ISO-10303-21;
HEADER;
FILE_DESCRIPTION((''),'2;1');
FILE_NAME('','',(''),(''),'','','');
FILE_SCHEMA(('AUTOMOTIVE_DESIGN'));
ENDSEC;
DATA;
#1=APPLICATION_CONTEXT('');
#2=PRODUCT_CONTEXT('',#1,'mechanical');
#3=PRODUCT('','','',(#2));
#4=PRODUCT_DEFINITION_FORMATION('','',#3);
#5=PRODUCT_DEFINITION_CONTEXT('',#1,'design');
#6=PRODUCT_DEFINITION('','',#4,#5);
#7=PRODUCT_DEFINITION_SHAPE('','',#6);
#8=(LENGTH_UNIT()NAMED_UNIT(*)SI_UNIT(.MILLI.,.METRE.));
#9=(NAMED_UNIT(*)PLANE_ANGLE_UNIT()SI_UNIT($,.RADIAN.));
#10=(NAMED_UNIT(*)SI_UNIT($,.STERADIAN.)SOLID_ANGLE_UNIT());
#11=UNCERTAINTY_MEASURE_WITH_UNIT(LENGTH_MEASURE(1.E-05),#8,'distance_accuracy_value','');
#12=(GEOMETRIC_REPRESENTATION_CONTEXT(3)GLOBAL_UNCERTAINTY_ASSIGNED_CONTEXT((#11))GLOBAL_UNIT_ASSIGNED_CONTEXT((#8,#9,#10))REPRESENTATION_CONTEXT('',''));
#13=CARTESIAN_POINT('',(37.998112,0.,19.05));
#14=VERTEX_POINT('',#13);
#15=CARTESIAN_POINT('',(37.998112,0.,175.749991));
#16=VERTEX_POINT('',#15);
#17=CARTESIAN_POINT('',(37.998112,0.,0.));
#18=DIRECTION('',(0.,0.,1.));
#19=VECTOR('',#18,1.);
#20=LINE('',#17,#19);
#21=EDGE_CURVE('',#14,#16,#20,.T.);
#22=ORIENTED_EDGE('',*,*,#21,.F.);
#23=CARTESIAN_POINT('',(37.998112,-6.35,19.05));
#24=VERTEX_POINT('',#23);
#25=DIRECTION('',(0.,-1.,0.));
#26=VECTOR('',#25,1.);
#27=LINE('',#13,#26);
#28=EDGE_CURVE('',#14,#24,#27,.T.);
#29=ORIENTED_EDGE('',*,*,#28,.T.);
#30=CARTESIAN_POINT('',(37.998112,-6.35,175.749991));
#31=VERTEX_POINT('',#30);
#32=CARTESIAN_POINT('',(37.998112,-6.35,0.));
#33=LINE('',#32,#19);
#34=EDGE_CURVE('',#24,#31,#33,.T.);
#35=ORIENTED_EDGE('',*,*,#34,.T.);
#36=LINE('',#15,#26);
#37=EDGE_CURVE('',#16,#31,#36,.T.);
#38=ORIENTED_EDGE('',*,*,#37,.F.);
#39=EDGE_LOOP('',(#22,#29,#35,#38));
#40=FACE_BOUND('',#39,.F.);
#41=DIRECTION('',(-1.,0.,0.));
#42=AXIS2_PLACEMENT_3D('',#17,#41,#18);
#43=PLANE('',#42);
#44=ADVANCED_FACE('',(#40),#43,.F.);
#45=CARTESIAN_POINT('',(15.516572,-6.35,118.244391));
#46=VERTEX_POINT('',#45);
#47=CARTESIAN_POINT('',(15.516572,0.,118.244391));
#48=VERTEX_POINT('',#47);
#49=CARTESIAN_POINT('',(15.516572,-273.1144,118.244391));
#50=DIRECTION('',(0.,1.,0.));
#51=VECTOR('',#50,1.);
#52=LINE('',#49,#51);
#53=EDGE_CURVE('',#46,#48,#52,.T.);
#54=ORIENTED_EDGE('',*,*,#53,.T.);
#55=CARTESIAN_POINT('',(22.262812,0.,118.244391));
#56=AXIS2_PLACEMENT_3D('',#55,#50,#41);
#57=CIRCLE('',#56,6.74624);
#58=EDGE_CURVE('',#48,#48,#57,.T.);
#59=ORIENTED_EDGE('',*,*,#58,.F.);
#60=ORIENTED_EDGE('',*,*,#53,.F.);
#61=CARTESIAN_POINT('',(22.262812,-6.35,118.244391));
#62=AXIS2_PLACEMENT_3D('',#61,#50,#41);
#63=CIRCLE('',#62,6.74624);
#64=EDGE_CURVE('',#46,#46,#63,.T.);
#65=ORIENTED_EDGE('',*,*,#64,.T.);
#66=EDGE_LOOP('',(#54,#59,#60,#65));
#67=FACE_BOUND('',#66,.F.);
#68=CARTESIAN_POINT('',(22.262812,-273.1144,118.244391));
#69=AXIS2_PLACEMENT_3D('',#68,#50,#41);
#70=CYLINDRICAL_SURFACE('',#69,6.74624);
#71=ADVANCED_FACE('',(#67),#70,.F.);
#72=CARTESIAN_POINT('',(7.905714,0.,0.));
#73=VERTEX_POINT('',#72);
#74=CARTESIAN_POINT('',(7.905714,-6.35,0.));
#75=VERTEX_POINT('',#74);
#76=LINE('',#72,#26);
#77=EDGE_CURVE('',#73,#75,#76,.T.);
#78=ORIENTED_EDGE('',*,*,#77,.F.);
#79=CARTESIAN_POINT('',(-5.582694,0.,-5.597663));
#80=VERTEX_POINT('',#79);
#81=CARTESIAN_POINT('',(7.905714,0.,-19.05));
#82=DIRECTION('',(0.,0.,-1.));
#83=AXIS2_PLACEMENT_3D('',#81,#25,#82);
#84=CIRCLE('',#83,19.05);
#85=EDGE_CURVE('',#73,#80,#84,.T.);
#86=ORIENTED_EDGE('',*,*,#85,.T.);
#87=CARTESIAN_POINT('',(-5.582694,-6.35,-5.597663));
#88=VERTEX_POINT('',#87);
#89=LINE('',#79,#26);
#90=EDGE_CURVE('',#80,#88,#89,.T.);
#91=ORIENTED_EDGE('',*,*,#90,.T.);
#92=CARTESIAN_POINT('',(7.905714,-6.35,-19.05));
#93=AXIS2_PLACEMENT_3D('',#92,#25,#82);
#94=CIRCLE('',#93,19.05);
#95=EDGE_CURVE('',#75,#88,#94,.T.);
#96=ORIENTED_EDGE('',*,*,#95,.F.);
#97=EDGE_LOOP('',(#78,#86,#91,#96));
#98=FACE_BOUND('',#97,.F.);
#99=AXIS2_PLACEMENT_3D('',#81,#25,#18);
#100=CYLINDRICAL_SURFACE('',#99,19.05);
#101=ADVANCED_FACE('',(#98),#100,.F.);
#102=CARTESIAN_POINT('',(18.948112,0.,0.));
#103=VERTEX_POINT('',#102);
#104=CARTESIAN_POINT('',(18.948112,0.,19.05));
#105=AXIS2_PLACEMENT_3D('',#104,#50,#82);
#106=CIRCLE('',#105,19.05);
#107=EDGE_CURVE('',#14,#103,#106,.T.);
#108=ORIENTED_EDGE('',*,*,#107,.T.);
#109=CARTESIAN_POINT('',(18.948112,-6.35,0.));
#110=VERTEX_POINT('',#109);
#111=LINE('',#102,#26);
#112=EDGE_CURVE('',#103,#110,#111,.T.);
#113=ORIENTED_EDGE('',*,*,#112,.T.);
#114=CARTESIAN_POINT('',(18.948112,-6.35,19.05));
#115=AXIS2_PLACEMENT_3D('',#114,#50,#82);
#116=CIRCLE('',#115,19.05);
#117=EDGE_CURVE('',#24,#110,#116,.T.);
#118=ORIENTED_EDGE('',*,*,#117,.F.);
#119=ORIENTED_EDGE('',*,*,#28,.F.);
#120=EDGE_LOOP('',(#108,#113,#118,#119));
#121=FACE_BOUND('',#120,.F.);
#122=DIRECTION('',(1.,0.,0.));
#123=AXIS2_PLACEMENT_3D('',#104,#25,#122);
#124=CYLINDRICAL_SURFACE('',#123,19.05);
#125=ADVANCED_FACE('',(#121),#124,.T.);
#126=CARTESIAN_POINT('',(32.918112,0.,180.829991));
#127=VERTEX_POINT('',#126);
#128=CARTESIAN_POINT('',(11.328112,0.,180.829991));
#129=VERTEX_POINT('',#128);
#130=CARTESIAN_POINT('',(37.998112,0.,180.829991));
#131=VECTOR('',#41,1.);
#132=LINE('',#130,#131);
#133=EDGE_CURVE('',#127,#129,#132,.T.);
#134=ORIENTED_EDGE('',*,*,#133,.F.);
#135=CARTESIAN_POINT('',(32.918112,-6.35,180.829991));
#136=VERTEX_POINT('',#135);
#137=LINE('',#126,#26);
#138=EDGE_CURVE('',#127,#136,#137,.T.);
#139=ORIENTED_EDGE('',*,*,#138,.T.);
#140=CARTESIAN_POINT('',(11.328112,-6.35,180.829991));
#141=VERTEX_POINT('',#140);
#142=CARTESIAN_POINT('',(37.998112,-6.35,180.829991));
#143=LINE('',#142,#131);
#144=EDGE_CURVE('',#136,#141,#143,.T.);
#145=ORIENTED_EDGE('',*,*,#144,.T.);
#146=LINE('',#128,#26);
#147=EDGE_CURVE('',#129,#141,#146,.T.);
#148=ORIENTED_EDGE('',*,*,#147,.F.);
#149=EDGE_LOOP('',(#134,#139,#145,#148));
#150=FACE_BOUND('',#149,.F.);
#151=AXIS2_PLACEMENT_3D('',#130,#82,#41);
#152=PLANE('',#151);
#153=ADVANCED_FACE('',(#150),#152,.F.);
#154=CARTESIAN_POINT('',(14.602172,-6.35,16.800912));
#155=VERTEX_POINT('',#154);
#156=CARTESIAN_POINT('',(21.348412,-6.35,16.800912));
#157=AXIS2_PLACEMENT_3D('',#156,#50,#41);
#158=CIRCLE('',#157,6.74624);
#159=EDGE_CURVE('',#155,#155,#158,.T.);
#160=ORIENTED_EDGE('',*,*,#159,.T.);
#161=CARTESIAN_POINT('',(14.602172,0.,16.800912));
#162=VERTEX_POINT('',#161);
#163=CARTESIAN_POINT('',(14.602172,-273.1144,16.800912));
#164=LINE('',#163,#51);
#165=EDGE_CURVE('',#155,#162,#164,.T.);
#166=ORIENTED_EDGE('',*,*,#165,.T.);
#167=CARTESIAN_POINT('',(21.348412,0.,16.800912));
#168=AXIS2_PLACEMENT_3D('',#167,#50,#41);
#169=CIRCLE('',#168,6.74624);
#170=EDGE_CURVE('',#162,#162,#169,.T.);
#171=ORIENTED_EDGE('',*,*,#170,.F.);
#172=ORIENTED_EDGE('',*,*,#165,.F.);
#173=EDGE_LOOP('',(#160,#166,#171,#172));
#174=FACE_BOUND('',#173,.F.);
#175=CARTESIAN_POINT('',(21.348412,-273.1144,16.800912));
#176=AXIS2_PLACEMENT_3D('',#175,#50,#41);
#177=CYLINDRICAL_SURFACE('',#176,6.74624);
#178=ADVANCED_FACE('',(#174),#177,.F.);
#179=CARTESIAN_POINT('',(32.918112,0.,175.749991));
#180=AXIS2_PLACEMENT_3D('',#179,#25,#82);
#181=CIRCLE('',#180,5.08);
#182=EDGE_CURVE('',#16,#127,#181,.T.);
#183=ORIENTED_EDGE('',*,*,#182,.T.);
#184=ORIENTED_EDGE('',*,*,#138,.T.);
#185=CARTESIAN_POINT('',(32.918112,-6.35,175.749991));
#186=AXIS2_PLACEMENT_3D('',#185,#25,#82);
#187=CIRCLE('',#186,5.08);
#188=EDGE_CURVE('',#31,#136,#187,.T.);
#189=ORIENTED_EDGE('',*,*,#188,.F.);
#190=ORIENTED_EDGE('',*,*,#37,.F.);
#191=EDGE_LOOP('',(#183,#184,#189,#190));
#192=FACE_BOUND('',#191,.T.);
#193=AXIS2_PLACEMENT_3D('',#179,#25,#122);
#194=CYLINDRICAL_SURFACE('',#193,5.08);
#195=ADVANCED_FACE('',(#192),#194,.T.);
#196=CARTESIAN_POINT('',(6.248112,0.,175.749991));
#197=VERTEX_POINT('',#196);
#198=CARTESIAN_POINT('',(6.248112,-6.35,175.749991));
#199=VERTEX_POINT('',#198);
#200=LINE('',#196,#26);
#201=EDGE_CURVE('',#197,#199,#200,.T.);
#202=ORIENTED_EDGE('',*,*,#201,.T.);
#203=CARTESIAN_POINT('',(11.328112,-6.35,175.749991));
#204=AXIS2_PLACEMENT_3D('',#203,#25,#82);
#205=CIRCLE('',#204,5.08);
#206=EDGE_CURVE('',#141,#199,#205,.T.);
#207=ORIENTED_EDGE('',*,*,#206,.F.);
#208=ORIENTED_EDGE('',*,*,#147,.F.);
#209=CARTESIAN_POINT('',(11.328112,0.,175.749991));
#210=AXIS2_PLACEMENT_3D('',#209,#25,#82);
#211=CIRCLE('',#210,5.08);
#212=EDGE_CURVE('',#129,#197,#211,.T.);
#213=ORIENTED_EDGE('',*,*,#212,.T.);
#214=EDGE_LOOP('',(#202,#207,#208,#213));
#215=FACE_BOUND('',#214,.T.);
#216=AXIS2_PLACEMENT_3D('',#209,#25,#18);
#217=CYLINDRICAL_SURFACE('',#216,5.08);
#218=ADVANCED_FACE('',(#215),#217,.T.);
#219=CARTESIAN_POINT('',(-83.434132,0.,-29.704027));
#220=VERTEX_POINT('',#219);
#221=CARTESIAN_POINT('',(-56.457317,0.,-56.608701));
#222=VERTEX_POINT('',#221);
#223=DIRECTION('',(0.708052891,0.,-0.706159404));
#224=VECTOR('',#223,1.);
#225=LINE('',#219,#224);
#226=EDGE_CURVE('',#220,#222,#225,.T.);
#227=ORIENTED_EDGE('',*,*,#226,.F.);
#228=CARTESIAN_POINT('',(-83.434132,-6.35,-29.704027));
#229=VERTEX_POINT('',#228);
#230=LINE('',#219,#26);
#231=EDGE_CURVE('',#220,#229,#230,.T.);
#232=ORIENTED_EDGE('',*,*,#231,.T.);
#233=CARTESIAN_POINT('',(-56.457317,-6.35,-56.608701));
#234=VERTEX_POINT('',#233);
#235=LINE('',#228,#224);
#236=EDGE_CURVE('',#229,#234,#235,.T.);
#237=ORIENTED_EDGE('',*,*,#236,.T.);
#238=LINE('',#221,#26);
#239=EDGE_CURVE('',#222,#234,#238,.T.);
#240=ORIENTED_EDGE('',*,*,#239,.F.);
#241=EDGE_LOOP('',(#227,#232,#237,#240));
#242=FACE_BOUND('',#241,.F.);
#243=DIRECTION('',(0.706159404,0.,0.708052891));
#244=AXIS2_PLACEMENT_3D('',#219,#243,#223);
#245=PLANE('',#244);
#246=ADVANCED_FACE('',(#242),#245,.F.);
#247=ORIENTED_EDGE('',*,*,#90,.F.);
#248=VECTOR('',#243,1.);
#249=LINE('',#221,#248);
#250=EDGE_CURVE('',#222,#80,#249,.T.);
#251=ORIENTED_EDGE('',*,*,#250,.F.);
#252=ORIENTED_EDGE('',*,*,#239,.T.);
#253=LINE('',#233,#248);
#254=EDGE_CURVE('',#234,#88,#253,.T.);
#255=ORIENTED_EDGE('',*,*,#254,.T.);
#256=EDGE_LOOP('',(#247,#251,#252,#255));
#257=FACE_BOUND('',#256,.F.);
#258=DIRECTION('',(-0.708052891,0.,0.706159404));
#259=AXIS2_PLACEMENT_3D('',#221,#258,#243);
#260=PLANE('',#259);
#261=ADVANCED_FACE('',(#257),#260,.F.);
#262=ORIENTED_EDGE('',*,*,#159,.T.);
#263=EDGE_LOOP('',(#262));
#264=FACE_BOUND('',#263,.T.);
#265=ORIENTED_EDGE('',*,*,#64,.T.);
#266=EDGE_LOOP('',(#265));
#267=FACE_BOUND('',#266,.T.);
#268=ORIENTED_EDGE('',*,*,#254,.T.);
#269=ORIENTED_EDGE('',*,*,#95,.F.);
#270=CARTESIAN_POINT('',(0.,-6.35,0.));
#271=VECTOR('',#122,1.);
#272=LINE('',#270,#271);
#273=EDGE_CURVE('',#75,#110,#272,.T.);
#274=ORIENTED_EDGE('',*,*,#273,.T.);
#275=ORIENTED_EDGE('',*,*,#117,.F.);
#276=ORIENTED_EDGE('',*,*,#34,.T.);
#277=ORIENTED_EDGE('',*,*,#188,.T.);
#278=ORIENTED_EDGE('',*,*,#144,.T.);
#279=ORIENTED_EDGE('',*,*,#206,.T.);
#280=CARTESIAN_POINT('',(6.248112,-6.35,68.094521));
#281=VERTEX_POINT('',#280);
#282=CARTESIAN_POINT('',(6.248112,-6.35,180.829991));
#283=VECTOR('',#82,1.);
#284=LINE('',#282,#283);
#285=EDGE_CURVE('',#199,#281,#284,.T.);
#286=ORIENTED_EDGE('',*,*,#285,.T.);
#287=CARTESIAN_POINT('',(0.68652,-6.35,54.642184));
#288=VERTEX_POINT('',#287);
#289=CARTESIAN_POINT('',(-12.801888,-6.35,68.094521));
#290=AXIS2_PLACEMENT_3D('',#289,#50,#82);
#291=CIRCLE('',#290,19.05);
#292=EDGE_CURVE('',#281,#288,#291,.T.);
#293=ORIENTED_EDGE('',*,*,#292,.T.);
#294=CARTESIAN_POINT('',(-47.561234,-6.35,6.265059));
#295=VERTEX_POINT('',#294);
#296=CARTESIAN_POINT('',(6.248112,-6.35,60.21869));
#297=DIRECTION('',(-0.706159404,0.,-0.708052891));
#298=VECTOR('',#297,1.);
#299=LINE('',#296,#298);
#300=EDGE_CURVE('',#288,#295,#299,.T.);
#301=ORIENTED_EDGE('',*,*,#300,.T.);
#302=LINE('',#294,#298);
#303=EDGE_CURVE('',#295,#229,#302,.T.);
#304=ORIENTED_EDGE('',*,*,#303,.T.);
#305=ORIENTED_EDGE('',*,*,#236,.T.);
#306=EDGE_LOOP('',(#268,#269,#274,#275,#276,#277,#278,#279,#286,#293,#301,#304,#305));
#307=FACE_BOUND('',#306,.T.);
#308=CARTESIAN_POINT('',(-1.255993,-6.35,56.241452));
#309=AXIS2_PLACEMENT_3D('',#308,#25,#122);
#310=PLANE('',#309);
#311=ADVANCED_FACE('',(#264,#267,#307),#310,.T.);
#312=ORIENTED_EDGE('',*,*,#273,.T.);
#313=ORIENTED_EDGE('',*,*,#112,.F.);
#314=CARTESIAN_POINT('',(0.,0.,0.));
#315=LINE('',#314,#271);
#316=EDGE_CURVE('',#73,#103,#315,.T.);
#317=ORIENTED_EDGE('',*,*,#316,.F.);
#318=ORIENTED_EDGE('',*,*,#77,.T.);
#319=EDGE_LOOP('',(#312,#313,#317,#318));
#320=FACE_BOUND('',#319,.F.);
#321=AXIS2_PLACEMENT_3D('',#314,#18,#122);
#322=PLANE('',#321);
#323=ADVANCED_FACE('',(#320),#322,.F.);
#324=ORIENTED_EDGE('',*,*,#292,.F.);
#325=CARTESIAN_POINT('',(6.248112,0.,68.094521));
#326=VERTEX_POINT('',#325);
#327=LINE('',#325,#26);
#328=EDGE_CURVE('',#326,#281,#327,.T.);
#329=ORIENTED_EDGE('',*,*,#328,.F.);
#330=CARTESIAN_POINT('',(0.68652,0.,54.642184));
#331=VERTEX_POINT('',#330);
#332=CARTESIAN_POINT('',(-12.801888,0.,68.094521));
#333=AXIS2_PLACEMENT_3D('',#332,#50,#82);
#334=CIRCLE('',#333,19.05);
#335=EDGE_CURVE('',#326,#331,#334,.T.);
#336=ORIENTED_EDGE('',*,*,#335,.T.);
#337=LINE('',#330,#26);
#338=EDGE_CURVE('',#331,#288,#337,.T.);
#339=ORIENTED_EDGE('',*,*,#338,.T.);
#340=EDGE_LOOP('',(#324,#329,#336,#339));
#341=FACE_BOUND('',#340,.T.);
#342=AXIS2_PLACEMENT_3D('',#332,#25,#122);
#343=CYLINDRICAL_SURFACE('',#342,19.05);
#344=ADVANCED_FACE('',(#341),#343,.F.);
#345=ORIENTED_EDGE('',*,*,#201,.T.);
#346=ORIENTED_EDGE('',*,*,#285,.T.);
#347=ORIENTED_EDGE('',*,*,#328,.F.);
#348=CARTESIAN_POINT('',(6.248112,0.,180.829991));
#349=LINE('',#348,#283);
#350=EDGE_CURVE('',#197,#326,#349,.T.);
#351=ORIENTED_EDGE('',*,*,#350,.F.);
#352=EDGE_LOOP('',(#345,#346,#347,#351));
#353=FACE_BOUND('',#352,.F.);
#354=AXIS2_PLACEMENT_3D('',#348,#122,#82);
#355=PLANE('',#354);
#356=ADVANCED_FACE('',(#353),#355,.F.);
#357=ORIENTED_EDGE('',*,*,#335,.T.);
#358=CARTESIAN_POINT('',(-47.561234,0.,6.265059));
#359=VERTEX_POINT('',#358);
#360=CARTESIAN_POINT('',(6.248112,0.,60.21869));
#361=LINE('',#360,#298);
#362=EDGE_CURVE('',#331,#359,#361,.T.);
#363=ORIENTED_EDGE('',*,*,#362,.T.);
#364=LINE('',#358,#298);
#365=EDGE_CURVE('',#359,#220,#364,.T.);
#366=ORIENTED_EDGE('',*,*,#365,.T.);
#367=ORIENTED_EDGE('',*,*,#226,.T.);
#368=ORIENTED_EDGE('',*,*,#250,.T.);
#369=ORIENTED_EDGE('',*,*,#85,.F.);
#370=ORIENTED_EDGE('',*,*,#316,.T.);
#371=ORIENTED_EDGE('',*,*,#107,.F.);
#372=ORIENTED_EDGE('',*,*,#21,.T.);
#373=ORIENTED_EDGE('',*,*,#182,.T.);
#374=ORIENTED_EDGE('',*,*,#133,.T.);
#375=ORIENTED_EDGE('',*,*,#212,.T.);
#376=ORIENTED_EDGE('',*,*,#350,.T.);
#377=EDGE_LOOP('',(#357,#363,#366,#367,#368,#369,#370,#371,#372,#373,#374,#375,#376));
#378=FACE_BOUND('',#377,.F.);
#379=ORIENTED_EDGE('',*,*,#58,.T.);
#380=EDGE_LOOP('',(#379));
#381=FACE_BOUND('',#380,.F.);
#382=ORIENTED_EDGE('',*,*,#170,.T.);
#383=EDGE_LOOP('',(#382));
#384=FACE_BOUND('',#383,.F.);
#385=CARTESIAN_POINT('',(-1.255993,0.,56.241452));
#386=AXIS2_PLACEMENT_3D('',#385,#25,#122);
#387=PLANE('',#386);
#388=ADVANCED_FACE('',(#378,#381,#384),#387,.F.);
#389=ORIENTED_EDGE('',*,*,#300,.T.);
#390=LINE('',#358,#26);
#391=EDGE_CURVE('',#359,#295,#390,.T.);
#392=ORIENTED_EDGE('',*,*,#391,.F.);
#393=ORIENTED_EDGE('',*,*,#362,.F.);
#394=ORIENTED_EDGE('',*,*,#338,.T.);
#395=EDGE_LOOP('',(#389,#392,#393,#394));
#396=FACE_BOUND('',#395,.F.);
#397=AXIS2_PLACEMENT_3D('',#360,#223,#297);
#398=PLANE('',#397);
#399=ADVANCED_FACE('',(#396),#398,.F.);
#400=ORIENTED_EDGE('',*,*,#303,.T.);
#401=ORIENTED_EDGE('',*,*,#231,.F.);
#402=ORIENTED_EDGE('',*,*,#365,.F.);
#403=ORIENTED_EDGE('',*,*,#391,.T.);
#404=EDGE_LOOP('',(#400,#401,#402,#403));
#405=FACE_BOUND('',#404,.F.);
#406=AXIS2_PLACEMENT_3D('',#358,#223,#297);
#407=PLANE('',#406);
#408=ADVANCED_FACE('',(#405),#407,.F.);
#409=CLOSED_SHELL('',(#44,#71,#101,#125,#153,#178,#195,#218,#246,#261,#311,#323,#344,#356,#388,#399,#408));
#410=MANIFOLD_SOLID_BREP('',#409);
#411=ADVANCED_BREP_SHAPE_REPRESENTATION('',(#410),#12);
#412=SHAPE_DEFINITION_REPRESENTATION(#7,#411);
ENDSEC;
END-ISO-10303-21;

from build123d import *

# Parameters (mm, degrees)
F1_DEPTH = 6.35
F3_D     = 13.49248
F4_R     = 19.05
F5_R     = 5.08


# Not quite as in the source:
# - a feature names something its author has since deleted; it is built from what else it names


with BuildPart() as f1:
    # F0 (on Front) → F1 (new body)
    with BuildSketch(Plane.XZ):
        Polygon((37.9981123171, 180.8299914), (6.2481123171, 180.8299914), (6.2481123171, 60.2186896705), (-47.5612342455, 6.2650593709), (-83.434131954, -29.7040274954), (-56.4573168042, -56.6087007767), (-20.5844190958, -20.6396139104), (0, 0), (6.2481123171, 0), (37.9981123171, 0), (37.9981123171, 33.02), align=None)
    extrude(amount=F1_DEPTH)

    # F3 (through all)
    with Locations(Plane.XZ.offset(6.35)):
        with Locations((22.2628123171, 118.2443914), (21.3484123171, 16.8009124652)):
            Hole(F3_D / 2)

    # F4
    f4_edges = [f1.edges().sort_by_distance(p)[0] for p in [
        (6.248112, -3.175, 60.21869),
        (37.998112, -3.175, 0),
        (0, -3.175, 0),
    ]]
    fillet(f4_edges, radius=F4_R)

    # F5
    f5_edges = [f1.edges().sort_by_distance(p)[0] for p in [
        (6.248112, -3.175, 180.829991),
        (37.998112, -3.175, 180.829991),
    ]]
    fillet(f5_edges, radius=F5_R)


solid = f1.part
